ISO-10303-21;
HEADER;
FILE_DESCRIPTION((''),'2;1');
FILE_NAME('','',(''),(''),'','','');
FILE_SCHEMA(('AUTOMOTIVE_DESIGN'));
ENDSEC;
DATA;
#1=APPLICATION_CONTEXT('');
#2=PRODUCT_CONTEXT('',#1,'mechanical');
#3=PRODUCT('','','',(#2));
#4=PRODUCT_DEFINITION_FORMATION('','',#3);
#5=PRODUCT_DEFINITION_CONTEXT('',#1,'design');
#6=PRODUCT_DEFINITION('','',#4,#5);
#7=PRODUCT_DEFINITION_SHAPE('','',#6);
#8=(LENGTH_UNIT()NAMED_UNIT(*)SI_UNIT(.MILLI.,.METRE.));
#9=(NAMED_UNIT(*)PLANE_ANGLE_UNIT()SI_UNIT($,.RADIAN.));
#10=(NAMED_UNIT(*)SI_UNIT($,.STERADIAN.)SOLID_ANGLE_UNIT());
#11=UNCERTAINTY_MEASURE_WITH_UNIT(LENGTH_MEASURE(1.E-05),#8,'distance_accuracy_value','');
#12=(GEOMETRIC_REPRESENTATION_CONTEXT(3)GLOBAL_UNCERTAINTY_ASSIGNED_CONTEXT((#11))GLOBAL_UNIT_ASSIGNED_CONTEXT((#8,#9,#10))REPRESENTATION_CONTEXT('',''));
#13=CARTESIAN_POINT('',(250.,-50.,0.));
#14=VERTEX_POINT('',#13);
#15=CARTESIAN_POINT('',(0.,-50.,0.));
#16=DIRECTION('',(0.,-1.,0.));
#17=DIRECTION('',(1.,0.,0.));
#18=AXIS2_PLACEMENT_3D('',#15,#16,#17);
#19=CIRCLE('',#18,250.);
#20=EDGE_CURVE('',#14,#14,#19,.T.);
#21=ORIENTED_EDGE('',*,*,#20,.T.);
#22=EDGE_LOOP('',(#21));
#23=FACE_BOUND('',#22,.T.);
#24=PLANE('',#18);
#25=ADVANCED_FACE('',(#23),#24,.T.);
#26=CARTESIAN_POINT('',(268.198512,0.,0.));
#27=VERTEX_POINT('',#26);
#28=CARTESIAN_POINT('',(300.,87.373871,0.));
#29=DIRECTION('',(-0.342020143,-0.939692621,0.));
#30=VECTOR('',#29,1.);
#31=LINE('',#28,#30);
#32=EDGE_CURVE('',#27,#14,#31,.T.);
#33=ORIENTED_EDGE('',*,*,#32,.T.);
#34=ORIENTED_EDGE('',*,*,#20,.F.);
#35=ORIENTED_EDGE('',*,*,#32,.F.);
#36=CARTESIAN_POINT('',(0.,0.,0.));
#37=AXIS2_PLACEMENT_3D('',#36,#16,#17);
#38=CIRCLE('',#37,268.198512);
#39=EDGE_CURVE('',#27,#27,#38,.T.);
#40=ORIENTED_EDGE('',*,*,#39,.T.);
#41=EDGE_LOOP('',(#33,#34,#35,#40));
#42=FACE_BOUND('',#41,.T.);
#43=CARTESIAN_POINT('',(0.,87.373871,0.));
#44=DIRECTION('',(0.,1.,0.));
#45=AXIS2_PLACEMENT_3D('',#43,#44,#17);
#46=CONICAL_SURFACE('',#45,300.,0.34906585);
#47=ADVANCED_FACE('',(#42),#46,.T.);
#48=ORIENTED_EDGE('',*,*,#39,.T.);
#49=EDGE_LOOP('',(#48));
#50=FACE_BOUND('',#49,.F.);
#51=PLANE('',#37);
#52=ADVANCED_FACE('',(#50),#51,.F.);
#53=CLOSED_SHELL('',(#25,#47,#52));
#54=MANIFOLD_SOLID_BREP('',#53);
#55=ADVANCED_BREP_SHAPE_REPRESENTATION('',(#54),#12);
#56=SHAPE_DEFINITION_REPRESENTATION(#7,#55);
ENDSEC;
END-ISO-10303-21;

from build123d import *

# Parameters (mm, degrees)
F0_R     = 300
F1_DEPTH = 50


# Not quite as in the source:
# - a fillet or chamfer that OpenCascade refuses, or shapes differently, is made with other operations: its cross-section is extruded or revolved along the edge and cut away or added


with BuildPart() as f1:
    # F0 (on Front) → F1 (new body)
    with BuildSketch(Plane.XZ):
        Circle(F0_R)
    extrude(amount=F1_DEPTH)

    # F2: chamfer of 50 x 137.3738709727 on 1 edges, made by hand

    # F2_s1 → F2_t2 (revolve, cut)
    with BuildSketch(Plane.XY):
        Polygon((300, 87.3738709727), (250, -50), (300, -50), align=None)
    revolve(axis=Axis((0, -50, 0), (0, -1, 0)), mode=Mode.SUBTRACT)


solid = f1.part
